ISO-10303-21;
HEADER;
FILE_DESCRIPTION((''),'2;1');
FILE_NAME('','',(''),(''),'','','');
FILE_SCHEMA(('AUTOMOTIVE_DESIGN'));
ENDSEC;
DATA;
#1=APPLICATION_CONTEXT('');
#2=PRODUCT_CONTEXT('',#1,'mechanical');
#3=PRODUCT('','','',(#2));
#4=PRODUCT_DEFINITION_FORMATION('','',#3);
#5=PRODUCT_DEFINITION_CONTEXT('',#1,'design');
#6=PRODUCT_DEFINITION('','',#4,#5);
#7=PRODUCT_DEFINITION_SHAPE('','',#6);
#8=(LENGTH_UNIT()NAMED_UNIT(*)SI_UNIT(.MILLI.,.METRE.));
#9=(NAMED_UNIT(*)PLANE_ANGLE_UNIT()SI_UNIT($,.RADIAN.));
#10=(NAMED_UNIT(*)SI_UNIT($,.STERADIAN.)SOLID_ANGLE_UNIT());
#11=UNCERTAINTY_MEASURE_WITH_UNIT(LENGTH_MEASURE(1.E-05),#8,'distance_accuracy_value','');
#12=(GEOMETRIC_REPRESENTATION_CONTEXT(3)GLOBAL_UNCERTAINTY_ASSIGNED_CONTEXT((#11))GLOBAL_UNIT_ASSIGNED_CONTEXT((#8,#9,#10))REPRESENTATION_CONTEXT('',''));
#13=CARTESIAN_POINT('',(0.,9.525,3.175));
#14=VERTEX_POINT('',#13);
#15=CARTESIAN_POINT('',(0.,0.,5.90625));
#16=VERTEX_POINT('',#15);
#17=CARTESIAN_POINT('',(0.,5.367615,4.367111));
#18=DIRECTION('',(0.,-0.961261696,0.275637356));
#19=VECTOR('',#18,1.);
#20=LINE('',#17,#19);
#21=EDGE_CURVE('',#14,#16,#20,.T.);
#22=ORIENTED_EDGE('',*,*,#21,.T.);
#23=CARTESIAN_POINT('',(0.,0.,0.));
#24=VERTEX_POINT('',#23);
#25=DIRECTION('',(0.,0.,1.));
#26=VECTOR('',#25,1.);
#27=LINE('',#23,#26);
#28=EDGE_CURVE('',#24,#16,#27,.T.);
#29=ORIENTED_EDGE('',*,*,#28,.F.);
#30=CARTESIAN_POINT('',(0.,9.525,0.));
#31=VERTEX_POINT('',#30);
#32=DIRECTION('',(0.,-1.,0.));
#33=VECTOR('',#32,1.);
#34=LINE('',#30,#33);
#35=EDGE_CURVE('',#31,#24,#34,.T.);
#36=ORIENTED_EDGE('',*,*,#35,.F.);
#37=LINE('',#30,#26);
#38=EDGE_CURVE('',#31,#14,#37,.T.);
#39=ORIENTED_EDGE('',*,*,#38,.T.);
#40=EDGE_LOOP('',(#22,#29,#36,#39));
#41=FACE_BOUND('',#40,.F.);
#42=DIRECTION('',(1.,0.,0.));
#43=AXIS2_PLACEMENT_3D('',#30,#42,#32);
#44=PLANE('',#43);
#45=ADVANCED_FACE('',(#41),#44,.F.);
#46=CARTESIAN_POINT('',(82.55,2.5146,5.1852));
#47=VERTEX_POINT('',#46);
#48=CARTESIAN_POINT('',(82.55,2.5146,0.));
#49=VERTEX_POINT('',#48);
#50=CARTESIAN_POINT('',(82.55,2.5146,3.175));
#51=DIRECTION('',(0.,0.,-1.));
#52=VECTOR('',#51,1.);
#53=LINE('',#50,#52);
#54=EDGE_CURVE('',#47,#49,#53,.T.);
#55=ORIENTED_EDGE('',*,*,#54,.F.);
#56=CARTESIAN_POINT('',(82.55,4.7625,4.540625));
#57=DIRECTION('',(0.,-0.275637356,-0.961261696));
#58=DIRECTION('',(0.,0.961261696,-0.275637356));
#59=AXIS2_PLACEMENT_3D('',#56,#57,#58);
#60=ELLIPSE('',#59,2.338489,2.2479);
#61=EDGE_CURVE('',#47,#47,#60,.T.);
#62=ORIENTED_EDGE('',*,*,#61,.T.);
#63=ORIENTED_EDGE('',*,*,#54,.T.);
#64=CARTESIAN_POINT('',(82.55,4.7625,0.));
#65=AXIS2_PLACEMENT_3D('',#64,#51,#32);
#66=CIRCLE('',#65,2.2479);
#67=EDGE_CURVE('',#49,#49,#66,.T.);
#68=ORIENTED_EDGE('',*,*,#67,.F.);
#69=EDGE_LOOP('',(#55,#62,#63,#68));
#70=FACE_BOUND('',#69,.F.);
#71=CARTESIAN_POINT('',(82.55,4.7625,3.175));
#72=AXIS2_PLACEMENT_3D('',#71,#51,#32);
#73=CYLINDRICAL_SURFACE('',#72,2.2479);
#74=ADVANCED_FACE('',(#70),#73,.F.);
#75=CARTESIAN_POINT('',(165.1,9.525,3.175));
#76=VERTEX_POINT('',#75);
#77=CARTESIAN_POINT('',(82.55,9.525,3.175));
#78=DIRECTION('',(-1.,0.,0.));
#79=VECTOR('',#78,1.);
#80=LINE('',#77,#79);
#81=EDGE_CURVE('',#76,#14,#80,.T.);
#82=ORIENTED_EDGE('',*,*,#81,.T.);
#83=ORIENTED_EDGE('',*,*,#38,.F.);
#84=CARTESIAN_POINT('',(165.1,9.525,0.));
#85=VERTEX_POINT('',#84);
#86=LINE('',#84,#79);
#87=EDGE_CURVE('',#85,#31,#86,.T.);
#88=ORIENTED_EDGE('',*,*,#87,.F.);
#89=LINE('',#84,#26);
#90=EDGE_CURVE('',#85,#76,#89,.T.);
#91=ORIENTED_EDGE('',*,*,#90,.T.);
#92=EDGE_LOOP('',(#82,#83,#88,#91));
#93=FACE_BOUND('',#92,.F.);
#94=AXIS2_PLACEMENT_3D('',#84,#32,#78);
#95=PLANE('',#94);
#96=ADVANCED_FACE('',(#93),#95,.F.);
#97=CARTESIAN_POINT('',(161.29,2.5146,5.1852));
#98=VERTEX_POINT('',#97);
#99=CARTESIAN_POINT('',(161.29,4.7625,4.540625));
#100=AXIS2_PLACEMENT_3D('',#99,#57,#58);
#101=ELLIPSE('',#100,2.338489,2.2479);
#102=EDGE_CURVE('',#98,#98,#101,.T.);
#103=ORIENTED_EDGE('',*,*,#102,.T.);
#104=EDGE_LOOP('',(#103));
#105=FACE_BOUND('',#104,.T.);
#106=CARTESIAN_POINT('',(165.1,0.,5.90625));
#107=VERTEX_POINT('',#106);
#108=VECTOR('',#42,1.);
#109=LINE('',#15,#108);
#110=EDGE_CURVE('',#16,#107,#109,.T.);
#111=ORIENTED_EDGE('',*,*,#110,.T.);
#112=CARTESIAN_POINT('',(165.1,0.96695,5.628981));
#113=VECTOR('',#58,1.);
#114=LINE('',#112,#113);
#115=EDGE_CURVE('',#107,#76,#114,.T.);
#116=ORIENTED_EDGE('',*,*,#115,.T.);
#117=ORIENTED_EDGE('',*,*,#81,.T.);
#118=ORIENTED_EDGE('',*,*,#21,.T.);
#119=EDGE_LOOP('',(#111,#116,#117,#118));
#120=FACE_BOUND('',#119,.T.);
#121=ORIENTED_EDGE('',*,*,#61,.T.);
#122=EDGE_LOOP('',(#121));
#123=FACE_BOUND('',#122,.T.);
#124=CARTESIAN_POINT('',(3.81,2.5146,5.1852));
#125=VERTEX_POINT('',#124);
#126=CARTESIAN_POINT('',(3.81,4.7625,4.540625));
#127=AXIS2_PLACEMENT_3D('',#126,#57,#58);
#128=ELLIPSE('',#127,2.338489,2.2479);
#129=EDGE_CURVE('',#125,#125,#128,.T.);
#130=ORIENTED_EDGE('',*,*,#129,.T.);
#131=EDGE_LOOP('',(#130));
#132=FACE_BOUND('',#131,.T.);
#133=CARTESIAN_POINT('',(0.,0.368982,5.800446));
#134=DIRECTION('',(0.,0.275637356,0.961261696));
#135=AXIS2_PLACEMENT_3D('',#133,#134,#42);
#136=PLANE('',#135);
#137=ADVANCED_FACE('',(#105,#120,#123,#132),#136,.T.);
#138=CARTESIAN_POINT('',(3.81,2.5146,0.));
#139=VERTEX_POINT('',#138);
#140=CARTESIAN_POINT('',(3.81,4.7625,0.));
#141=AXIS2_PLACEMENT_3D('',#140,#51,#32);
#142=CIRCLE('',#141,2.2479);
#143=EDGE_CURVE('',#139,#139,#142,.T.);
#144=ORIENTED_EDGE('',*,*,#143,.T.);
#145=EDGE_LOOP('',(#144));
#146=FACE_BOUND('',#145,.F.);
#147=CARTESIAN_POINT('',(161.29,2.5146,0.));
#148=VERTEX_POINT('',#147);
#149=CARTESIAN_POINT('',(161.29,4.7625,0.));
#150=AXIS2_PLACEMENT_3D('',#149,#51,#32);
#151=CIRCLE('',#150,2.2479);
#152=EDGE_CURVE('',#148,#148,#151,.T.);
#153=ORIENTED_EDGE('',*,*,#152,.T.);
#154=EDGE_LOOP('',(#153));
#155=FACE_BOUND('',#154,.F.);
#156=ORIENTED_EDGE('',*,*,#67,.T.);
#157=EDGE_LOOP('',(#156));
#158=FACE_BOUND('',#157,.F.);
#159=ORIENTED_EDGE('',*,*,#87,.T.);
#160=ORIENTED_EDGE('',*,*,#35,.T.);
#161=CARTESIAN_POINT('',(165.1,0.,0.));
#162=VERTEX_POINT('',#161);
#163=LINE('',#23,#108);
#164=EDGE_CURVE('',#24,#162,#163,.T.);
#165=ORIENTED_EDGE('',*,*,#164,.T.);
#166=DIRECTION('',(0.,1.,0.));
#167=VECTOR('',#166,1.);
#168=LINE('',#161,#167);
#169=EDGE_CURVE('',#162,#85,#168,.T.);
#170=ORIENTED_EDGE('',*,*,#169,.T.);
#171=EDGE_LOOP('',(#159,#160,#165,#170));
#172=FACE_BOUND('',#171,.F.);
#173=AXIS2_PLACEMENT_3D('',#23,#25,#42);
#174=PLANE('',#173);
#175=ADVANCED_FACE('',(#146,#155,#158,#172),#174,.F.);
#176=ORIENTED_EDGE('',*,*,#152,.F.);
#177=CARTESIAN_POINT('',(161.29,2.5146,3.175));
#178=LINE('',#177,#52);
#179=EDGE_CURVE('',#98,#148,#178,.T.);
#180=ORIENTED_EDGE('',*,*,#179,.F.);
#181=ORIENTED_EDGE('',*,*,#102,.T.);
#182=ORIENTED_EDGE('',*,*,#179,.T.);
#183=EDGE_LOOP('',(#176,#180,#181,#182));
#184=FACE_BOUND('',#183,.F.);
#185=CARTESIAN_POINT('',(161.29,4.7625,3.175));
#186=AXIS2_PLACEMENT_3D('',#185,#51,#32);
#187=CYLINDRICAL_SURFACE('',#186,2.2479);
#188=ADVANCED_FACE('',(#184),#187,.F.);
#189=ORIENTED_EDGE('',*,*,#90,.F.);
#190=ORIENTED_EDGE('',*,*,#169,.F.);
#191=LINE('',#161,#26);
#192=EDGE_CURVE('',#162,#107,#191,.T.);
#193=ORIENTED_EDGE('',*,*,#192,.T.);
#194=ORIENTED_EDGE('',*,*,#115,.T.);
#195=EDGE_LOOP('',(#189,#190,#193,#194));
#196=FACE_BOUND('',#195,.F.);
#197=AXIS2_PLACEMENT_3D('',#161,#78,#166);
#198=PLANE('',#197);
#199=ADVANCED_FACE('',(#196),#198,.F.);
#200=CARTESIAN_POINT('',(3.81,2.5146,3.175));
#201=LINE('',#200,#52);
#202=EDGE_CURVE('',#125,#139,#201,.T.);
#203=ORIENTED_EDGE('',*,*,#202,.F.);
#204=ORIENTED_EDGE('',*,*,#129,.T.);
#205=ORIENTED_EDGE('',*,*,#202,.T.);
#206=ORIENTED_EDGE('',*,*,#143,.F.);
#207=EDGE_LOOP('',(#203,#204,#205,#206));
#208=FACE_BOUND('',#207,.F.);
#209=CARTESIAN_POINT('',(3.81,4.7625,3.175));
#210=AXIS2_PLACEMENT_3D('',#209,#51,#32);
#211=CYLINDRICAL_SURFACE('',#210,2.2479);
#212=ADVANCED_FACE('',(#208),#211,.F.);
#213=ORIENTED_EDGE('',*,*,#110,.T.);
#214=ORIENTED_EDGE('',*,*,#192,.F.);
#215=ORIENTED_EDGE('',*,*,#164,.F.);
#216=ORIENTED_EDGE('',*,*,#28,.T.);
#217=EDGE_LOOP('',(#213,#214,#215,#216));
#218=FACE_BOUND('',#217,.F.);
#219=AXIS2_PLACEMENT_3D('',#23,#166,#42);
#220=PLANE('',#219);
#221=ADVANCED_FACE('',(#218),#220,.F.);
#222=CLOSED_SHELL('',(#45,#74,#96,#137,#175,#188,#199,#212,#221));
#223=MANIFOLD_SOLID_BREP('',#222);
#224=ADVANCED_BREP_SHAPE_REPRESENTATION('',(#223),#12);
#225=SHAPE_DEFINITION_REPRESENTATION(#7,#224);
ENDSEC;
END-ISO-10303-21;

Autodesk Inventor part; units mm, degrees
ref_plane "YZ Plane" through (0, 0, 0) normal (1, 0, 0) x (0, 1, 0)
ref_plane "XZ Plane" through (0, 0, 0) normal (0, 1, 0) x (-1, 0, 0)
ref_plane "XY Plane" through (0, 0, 0) normal (0, 0, 1) x (1, 0, 0)
sketch "Sketch1" plane through (0, 0, 0) normal (0, 0, 1) x (1, 0, 0)
  line L0 (0, 0) -> (165.1, 0)
  line L1 (165.1, 0) -> (165.1, 9.525)
  line L2 (165.1, 9.525) -> (0, 9.525)
  line L3 (0, 9.525) -> (0, 0)
  dimension "d0" = 165.1
  dimension "d1" = 9.525
extrude "Extrusion1" add sketch "Sketch1" along normal blind 3.175
sketch "Sketch2" plane through (0, 0, 3.175) normal (0, 0, 1) x (1, 0, 0)
  line L0 (165.1, 9.525) -> (0, 9.525) projected
  line L1 (0, 9.525) -> (0, 0) projected
  circle A0 centre (3.81, 4.7625) radius 0.5592
  point P0 (82.55, 4.7625)
  point P1 (161.29, 4.7625)
  dimension "d4" = 3.81
  dimension "d5" = 4.7625
  dimension "d8" = 78.74
hole "Hole1" at (3.81, 4.7625, 3.175) at (82.55, 4.7625, 3.175) at (161.29, 4.7625, 3.175) direction (0, 0, -1) diameter 4.4958 end through all clearance for "Flat Head Machine Screw" size "M4" standard "Ansi Metric M Profile"
draft "FaceDraft3" angle 16 pull direction (0, 1, 0) faces at (82.55, 0.8382, 3.175) fixed edges at (82.55, 9.525, 3.175)
properties part number "bar"
